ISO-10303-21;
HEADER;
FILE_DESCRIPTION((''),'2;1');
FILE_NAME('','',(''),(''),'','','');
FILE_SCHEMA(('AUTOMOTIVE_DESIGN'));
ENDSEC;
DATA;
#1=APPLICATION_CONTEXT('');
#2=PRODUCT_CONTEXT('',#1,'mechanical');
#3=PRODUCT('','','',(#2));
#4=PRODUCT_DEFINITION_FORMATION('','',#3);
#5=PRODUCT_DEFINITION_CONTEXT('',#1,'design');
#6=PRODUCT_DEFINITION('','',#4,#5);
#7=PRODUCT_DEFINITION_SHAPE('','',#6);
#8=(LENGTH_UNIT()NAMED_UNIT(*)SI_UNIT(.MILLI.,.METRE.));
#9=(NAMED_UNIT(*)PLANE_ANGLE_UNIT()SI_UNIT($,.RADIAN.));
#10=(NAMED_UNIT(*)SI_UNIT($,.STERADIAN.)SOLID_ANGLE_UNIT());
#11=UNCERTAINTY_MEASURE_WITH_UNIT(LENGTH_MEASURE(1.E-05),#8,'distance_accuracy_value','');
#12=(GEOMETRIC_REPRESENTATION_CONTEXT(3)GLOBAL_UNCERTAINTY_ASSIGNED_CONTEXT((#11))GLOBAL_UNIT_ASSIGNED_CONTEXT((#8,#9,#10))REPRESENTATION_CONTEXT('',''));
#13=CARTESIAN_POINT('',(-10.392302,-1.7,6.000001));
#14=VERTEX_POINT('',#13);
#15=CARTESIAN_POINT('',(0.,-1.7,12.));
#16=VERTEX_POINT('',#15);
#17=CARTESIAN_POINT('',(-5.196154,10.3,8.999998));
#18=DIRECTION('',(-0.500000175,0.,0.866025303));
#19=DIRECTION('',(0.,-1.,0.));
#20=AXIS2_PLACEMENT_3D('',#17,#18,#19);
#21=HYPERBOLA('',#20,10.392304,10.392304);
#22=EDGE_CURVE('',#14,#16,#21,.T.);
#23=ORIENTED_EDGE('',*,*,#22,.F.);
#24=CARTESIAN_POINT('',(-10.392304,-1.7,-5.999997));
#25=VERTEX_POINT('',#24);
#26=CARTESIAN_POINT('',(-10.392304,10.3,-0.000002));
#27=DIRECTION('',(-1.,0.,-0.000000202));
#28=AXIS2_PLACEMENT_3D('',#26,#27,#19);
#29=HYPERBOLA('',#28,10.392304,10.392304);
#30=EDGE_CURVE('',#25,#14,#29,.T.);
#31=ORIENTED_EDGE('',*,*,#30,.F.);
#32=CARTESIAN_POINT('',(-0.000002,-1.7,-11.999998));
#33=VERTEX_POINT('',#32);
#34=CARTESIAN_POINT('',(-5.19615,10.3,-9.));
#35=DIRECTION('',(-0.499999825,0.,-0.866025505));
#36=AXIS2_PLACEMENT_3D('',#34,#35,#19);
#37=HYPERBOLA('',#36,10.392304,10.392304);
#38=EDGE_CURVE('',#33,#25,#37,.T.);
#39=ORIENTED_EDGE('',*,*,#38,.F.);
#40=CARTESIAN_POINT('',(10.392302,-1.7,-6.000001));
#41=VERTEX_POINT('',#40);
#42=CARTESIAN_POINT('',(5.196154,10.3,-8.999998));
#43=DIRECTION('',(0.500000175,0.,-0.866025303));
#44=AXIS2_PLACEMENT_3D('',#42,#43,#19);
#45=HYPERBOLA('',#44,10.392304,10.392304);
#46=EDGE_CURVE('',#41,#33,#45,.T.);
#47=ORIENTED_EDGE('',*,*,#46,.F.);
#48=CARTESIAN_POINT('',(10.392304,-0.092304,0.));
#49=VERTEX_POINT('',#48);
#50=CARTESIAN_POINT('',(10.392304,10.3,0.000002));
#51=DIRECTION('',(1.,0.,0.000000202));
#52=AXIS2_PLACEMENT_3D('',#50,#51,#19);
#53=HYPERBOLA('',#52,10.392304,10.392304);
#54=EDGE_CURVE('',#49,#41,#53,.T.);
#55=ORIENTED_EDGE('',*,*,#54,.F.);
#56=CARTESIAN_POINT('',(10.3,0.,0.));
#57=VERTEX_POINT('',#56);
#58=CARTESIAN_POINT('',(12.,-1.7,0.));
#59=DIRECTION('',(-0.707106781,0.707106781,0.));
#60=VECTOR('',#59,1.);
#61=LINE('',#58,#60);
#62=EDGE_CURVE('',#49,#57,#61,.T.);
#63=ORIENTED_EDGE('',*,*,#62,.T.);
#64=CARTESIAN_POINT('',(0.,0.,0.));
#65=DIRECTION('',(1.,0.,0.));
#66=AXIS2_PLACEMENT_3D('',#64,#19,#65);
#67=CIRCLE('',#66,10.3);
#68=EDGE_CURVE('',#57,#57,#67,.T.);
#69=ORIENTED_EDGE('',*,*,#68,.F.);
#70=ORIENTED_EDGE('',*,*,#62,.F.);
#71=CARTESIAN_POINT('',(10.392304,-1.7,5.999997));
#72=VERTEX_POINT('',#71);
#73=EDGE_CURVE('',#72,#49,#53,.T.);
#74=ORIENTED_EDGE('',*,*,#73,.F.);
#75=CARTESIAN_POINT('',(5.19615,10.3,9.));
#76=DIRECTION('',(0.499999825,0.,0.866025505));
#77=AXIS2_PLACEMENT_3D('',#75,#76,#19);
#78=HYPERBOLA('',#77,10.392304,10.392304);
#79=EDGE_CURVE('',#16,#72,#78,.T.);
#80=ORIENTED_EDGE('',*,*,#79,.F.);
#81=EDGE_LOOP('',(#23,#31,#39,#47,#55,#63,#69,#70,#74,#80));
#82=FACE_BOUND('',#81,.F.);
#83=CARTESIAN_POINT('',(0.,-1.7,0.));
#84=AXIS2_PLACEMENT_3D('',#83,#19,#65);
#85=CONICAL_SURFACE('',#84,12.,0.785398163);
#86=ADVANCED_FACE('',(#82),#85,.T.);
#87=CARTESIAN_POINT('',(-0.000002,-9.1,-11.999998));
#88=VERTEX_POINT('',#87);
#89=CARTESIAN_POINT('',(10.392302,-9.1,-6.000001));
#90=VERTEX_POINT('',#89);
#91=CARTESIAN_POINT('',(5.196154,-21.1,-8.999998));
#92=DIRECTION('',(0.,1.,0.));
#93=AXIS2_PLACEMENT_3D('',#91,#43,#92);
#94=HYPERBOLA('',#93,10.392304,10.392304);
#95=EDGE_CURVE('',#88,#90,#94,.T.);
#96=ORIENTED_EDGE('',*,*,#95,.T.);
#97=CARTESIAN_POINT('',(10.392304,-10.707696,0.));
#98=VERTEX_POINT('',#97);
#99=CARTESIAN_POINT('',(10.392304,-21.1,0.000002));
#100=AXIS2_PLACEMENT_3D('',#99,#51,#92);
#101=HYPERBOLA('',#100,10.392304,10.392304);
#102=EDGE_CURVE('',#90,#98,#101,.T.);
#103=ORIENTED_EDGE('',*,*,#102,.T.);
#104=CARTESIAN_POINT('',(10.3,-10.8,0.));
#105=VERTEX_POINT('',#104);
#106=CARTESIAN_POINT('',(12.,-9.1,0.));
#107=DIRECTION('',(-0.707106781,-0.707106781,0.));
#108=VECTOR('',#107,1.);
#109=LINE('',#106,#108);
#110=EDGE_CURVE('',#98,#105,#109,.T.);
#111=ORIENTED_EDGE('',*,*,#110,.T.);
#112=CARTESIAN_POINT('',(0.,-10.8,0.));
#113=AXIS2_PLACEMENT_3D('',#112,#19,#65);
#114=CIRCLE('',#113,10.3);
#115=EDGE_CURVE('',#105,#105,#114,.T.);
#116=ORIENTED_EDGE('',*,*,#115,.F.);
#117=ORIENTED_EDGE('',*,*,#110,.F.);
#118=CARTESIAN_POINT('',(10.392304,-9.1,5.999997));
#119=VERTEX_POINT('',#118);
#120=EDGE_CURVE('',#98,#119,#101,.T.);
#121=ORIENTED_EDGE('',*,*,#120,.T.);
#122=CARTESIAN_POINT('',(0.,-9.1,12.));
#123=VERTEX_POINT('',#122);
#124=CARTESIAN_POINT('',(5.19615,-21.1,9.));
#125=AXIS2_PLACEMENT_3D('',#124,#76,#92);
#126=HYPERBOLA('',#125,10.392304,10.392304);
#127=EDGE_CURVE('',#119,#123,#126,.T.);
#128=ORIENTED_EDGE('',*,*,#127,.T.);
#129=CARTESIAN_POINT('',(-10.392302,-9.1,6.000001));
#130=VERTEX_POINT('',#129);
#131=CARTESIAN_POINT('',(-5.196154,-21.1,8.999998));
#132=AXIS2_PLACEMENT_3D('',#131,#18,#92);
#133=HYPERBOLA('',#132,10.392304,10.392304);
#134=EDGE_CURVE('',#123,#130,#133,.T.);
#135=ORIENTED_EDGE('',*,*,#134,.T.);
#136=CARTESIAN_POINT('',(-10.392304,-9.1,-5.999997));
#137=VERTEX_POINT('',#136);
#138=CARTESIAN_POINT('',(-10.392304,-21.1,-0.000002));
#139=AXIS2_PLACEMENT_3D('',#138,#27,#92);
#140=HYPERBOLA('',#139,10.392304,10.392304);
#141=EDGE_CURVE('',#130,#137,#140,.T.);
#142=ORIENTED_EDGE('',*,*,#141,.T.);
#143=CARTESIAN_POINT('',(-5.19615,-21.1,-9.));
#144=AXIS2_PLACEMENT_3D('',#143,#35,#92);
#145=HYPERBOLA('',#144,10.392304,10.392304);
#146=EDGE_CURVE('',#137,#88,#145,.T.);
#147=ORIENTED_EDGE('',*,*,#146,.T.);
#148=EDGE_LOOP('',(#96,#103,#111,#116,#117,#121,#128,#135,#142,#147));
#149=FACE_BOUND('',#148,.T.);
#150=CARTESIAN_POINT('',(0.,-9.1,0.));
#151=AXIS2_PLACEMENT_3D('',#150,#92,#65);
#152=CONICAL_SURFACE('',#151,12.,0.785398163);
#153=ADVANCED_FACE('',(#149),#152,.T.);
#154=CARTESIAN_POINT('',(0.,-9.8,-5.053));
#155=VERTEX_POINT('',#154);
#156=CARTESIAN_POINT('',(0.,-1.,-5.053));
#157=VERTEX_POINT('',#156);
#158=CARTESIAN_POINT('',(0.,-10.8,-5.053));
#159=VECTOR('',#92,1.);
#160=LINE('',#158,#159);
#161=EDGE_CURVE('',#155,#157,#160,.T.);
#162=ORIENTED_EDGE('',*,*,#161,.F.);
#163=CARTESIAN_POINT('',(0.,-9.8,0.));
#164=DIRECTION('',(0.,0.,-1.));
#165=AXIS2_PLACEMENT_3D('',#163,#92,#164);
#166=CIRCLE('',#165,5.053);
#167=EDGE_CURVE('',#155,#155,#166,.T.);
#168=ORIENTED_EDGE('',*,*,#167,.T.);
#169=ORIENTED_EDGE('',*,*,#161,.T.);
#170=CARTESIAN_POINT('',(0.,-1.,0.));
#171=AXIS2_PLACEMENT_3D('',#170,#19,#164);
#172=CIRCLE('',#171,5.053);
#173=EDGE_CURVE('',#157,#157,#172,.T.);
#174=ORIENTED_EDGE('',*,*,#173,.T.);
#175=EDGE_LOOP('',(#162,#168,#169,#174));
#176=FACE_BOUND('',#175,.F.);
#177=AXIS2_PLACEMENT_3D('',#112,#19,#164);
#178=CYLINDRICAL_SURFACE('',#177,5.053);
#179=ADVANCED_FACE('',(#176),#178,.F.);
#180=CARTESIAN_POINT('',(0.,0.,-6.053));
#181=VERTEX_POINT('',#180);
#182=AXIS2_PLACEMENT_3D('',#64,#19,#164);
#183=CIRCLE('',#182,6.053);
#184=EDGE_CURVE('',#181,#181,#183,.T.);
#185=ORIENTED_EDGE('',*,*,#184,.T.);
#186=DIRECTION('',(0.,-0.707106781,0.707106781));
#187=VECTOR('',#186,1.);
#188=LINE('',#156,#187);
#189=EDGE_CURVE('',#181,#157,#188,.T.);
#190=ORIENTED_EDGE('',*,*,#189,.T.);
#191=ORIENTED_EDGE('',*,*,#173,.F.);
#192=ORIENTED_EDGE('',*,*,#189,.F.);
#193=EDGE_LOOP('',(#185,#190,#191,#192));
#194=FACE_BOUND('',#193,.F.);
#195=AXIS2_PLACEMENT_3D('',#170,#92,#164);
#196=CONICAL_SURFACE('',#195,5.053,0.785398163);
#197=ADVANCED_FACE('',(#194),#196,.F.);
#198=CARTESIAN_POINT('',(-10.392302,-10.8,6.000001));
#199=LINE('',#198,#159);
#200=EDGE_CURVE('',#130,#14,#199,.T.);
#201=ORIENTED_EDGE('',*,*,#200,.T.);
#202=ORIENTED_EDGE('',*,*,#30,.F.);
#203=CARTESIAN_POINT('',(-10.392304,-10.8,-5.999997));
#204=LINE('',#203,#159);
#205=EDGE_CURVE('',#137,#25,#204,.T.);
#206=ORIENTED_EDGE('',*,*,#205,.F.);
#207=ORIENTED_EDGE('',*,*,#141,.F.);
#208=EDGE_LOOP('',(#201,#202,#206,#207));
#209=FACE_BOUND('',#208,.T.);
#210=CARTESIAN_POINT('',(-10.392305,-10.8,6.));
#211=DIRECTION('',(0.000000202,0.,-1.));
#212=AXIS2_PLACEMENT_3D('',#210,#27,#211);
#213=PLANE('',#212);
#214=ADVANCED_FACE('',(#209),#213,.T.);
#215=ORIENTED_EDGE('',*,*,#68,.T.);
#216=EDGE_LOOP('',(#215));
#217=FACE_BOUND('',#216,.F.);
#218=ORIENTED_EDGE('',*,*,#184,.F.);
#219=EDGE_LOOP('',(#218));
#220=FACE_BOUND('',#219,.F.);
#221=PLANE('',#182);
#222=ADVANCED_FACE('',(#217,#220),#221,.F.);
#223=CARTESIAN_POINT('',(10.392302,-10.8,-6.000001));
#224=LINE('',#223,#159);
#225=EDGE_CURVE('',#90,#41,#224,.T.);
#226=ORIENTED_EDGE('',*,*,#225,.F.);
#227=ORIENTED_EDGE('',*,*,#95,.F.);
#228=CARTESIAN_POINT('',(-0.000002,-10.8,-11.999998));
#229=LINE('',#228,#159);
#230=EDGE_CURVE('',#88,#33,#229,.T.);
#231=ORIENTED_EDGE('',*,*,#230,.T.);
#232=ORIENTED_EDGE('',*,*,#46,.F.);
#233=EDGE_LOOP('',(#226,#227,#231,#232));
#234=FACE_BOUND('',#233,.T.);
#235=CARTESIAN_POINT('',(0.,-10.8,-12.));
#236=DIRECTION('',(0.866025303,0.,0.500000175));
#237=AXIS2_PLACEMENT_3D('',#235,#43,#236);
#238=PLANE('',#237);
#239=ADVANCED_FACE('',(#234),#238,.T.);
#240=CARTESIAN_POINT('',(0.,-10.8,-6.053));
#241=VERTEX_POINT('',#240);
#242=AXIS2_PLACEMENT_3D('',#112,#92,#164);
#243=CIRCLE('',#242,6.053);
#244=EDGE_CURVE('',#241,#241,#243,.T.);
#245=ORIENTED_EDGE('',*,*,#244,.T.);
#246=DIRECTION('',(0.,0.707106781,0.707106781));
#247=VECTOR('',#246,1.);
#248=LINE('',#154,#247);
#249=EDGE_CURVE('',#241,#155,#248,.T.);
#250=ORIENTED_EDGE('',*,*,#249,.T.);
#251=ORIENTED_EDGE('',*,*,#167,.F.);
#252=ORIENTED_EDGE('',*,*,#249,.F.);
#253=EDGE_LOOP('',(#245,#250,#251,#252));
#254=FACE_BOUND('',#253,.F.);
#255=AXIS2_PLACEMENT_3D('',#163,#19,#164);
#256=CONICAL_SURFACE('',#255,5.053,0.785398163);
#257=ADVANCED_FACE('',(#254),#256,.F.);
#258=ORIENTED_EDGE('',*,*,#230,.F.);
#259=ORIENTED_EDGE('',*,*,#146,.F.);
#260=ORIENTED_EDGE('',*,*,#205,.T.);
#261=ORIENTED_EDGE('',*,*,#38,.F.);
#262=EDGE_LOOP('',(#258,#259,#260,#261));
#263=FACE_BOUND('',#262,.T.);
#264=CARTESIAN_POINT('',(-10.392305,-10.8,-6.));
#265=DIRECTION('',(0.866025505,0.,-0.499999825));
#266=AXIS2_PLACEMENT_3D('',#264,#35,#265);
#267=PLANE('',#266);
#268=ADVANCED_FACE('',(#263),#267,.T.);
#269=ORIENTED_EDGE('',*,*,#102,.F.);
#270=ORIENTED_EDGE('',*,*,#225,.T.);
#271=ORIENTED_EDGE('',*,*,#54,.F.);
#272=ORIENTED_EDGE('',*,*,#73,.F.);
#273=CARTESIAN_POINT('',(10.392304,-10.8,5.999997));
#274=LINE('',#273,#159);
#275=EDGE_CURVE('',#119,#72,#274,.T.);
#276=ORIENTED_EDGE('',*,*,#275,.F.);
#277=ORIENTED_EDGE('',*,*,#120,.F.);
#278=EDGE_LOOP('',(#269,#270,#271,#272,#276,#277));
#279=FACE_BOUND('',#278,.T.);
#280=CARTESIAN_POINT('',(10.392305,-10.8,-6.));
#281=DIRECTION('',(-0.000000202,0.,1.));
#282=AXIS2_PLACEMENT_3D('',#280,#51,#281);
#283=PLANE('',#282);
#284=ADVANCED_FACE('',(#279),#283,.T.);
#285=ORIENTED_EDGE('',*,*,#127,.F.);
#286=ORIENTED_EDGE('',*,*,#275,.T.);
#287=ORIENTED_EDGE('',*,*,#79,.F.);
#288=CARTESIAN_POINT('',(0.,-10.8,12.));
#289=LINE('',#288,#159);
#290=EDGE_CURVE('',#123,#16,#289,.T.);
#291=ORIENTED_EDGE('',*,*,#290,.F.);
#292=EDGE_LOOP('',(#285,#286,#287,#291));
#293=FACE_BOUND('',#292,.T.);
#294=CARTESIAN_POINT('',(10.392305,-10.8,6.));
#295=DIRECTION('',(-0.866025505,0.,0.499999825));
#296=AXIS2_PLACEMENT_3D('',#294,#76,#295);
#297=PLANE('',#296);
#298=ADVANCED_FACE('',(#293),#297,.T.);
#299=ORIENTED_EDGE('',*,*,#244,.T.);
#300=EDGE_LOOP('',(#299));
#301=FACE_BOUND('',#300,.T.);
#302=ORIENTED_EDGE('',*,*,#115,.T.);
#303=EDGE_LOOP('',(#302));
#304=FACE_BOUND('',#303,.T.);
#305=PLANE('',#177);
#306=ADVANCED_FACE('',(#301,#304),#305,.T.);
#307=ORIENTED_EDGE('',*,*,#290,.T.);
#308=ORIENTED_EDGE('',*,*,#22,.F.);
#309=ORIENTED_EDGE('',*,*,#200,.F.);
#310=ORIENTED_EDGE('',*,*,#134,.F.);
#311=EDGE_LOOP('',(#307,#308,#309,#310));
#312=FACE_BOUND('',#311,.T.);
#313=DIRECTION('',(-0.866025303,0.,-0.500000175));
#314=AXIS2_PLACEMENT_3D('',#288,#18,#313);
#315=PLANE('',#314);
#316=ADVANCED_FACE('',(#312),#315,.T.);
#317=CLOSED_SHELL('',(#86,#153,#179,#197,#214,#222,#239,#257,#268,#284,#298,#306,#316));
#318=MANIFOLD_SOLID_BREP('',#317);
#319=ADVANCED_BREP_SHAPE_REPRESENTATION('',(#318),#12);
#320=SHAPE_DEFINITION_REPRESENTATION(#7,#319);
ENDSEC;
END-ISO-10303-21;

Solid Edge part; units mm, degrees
sketch "Sketch1" plane through (0, 0, 0) normal (0, -1, 0) x (1, 0, 0)
  circle A0 centre (0, 0) radius 12
extrude "Protrusion1" add sketch "Sketch1" along normal blind 10.8
chamfer "Chamfer_1" distance 1.7 angle 45 2 edges at (-12, -10.8, 0) (-12, 0, 0)
sketch "Sketch2" plane through (0, -10.8, 0) normal (0, -1, 0) x (1, 0, 0)
  line L0 (0, 12) -> (-10.3923, 6)
  line L1 (-10.3923, 6) -> (-13.1704, 9.9939)
  line L2 (-13.1704, 9.9939) -> (-1.4905, 14.5877)
  line L3 (-1.4905, 14.5877) -> (0, 12)
extrude "ExtrudedCutout_1" cut sketch "Sketch2" against normal blind 81.3692
pattern_circular "Pattern1" count 6 over 360 about axis through (0, -10.8, 0) along (0, -1, 0) of "ExtrudedCutout_1"
hole "Hole_1" at (0, -10.8, 0) direction (0, 1, 0) diameter 10.106 end up to next
chamfer "Chamfer_2" distance 1 angle 45 2 edges at (-5.053, -10.8, 0) (0, 0, -5.053)
